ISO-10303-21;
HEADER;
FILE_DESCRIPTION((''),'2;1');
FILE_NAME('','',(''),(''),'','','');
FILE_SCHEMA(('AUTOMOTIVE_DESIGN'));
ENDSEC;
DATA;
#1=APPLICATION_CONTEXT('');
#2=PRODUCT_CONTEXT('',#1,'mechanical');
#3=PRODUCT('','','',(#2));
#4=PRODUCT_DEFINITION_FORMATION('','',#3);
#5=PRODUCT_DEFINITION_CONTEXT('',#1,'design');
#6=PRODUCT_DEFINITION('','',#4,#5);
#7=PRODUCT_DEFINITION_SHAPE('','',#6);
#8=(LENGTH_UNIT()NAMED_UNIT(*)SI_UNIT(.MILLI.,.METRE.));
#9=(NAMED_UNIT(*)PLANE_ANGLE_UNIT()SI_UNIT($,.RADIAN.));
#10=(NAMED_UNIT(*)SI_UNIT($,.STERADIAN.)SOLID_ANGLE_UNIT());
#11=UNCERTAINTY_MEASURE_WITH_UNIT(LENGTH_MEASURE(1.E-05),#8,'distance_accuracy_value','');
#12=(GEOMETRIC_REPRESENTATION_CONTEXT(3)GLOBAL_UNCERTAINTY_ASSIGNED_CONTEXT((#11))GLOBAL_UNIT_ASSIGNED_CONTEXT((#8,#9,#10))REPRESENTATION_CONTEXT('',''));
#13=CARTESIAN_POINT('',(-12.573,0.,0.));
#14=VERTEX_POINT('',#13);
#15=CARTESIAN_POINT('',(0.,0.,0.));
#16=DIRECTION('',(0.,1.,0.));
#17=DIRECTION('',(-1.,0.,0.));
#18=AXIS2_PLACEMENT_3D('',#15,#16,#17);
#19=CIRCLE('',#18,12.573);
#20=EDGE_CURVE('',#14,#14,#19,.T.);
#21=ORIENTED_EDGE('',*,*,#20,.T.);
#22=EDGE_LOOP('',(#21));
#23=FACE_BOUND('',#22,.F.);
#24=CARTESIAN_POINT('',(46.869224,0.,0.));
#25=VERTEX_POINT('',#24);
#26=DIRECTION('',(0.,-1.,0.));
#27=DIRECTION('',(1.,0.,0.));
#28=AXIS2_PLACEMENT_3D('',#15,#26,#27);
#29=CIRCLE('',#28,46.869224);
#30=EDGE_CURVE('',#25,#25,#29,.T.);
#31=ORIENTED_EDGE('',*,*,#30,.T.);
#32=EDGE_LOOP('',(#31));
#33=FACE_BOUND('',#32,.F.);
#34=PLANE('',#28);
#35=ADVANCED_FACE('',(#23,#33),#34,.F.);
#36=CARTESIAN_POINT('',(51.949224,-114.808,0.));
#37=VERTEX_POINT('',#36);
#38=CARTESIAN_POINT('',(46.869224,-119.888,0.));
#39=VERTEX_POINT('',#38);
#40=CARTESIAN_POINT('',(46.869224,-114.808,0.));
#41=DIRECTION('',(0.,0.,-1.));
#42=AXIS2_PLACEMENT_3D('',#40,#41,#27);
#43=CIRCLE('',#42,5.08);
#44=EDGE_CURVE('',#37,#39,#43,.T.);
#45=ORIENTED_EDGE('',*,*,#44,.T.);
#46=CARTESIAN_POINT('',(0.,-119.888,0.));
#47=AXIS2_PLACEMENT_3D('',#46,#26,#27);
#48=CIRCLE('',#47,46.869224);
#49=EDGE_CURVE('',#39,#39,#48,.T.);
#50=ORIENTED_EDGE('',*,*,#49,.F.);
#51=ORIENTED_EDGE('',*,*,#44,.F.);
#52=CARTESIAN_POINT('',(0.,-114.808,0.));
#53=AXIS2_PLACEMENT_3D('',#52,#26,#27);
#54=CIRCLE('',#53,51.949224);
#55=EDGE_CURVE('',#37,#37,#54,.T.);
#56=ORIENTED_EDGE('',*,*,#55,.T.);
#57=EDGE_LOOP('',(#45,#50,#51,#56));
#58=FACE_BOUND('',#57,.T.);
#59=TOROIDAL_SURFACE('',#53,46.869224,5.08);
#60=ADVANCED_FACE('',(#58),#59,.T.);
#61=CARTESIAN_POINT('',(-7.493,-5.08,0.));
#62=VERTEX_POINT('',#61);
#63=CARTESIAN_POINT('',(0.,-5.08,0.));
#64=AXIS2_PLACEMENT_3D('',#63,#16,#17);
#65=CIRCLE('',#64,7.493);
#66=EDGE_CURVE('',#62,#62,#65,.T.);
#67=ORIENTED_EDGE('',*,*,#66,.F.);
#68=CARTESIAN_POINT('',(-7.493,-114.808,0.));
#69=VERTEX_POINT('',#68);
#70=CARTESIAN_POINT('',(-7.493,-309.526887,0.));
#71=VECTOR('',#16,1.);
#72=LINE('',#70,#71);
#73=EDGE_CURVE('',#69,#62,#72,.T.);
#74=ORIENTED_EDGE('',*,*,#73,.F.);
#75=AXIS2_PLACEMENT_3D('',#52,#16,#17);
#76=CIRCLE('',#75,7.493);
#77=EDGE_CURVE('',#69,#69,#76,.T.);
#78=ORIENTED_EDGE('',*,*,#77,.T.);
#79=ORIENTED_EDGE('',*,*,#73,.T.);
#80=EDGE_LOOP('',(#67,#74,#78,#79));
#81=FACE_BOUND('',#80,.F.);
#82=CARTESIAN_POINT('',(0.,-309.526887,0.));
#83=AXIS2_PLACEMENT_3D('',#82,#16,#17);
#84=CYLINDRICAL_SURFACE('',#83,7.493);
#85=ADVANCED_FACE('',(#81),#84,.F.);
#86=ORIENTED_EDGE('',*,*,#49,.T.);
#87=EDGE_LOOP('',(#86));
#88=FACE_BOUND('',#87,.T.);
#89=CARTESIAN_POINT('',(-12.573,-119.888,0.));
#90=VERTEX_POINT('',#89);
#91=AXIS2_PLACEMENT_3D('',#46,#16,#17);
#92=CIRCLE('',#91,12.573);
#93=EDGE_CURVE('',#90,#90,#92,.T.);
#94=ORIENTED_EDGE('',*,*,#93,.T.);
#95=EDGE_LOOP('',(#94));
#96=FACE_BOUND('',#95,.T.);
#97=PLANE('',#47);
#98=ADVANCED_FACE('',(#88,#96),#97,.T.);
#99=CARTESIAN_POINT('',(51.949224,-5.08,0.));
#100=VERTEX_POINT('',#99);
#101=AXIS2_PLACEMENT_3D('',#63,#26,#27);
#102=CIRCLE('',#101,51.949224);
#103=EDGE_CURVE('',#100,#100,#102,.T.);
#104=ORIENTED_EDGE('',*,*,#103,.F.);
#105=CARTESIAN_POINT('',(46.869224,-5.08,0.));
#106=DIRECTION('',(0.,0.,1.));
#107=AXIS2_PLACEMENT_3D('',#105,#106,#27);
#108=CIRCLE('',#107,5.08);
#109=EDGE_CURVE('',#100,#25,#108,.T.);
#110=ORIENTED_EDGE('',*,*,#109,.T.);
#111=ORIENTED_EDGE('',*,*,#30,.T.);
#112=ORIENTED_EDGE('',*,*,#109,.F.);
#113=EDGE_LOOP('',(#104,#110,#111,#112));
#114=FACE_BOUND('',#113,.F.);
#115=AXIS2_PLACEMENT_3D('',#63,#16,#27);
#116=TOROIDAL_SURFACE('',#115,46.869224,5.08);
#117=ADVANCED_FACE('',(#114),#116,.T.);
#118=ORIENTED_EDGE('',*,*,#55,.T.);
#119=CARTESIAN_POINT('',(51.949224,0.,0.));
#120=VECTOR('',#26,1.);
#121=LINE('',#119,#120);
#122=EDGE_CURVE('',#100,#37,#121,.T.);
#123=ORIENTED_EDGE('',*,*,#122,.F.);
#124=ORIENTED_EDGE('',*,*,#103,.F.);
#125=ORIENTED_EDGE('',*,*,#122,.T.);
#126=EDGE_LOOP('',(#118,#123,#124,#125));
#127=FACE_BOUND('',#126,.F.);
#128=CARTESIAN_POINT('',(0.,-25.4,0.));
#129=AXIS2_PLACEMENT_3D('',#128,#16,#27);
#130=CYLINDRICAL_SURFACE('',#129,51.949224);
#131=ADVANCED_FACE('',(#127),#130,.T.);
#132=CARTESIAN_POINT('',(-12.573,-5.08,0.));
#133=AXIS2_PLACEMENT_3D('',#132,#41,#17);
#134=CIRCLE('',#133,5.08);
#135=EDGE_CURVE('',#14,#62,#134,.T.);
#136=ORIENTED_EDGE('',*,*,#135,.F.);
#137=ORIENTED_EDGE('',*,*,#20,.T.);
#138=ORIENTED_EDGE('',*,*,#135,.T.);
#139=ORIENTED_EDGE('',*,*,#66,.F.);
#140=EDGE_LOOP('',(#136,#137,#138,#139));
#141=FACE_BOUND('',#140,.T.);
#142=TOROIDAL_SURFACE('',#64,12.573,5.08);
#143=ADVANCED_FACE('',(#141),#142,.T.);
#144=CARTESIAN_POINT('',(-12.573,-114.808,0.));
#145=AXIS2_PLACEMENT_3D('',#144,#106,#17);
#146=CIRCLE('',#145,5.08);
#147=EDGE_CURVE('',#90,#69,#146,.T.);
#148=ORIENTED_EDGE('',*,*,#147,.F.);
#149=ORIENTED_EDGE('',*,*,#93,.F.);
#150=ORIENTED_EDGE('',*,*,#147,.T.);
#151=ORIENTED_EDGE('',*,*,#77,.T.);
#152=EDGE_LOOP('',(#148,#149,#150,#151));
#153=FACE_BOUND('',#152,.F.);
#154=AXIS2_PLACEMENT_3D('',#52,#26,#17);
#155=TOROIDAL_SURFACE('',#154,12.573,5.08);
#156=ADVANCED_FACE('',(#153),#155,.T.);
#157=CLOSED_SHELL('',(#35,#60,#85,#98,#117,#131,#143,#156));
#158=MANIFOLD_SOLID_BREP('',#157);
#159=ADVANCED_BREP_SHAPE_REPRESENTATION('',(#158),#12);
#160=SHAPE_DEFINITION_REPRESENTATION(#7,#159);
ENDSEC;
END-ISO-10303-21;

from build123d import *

# Parameters (mm, degrees)
F0_R     = 51.9492240189
F1_DEPTH = 25.4
F2_DEPTH = 94.488
F5_D     = 14.986
F6_R     = 5.08


with BuildPart() as f1:
    # F0 (on Front) → F1 (new body)
    with BuildSketch(Plane.XZ):
        Circle(F0_R)
    extrude(amount=F1_DEPTH)

    # F2 (add): a face of the model
    f2_faces = [f1.faces().sort_by_distance(p)[0] for p in [
        (0, -25.4, 0),
    ]]
    extrude(f2_faces, amount=F2_DEPTH)

    # F5 (through all)
    with Locations(Plane.XZ.offset(119.888)):
        with Locations((0, 0)):
            Hole(F5_D / 2)

    # F6
    f6_edges = [f1.edges().sort_by_distance(p)[0] for p in [
        (-51.949224, -119.888, 0),
        (-51.949224, 0, 0),
        (-7.493, 0, 0),
        (-7.493, -119.888, 0),
    ]]
    fillet(f6_edges, radius=F6_R)


solid = f1.part
